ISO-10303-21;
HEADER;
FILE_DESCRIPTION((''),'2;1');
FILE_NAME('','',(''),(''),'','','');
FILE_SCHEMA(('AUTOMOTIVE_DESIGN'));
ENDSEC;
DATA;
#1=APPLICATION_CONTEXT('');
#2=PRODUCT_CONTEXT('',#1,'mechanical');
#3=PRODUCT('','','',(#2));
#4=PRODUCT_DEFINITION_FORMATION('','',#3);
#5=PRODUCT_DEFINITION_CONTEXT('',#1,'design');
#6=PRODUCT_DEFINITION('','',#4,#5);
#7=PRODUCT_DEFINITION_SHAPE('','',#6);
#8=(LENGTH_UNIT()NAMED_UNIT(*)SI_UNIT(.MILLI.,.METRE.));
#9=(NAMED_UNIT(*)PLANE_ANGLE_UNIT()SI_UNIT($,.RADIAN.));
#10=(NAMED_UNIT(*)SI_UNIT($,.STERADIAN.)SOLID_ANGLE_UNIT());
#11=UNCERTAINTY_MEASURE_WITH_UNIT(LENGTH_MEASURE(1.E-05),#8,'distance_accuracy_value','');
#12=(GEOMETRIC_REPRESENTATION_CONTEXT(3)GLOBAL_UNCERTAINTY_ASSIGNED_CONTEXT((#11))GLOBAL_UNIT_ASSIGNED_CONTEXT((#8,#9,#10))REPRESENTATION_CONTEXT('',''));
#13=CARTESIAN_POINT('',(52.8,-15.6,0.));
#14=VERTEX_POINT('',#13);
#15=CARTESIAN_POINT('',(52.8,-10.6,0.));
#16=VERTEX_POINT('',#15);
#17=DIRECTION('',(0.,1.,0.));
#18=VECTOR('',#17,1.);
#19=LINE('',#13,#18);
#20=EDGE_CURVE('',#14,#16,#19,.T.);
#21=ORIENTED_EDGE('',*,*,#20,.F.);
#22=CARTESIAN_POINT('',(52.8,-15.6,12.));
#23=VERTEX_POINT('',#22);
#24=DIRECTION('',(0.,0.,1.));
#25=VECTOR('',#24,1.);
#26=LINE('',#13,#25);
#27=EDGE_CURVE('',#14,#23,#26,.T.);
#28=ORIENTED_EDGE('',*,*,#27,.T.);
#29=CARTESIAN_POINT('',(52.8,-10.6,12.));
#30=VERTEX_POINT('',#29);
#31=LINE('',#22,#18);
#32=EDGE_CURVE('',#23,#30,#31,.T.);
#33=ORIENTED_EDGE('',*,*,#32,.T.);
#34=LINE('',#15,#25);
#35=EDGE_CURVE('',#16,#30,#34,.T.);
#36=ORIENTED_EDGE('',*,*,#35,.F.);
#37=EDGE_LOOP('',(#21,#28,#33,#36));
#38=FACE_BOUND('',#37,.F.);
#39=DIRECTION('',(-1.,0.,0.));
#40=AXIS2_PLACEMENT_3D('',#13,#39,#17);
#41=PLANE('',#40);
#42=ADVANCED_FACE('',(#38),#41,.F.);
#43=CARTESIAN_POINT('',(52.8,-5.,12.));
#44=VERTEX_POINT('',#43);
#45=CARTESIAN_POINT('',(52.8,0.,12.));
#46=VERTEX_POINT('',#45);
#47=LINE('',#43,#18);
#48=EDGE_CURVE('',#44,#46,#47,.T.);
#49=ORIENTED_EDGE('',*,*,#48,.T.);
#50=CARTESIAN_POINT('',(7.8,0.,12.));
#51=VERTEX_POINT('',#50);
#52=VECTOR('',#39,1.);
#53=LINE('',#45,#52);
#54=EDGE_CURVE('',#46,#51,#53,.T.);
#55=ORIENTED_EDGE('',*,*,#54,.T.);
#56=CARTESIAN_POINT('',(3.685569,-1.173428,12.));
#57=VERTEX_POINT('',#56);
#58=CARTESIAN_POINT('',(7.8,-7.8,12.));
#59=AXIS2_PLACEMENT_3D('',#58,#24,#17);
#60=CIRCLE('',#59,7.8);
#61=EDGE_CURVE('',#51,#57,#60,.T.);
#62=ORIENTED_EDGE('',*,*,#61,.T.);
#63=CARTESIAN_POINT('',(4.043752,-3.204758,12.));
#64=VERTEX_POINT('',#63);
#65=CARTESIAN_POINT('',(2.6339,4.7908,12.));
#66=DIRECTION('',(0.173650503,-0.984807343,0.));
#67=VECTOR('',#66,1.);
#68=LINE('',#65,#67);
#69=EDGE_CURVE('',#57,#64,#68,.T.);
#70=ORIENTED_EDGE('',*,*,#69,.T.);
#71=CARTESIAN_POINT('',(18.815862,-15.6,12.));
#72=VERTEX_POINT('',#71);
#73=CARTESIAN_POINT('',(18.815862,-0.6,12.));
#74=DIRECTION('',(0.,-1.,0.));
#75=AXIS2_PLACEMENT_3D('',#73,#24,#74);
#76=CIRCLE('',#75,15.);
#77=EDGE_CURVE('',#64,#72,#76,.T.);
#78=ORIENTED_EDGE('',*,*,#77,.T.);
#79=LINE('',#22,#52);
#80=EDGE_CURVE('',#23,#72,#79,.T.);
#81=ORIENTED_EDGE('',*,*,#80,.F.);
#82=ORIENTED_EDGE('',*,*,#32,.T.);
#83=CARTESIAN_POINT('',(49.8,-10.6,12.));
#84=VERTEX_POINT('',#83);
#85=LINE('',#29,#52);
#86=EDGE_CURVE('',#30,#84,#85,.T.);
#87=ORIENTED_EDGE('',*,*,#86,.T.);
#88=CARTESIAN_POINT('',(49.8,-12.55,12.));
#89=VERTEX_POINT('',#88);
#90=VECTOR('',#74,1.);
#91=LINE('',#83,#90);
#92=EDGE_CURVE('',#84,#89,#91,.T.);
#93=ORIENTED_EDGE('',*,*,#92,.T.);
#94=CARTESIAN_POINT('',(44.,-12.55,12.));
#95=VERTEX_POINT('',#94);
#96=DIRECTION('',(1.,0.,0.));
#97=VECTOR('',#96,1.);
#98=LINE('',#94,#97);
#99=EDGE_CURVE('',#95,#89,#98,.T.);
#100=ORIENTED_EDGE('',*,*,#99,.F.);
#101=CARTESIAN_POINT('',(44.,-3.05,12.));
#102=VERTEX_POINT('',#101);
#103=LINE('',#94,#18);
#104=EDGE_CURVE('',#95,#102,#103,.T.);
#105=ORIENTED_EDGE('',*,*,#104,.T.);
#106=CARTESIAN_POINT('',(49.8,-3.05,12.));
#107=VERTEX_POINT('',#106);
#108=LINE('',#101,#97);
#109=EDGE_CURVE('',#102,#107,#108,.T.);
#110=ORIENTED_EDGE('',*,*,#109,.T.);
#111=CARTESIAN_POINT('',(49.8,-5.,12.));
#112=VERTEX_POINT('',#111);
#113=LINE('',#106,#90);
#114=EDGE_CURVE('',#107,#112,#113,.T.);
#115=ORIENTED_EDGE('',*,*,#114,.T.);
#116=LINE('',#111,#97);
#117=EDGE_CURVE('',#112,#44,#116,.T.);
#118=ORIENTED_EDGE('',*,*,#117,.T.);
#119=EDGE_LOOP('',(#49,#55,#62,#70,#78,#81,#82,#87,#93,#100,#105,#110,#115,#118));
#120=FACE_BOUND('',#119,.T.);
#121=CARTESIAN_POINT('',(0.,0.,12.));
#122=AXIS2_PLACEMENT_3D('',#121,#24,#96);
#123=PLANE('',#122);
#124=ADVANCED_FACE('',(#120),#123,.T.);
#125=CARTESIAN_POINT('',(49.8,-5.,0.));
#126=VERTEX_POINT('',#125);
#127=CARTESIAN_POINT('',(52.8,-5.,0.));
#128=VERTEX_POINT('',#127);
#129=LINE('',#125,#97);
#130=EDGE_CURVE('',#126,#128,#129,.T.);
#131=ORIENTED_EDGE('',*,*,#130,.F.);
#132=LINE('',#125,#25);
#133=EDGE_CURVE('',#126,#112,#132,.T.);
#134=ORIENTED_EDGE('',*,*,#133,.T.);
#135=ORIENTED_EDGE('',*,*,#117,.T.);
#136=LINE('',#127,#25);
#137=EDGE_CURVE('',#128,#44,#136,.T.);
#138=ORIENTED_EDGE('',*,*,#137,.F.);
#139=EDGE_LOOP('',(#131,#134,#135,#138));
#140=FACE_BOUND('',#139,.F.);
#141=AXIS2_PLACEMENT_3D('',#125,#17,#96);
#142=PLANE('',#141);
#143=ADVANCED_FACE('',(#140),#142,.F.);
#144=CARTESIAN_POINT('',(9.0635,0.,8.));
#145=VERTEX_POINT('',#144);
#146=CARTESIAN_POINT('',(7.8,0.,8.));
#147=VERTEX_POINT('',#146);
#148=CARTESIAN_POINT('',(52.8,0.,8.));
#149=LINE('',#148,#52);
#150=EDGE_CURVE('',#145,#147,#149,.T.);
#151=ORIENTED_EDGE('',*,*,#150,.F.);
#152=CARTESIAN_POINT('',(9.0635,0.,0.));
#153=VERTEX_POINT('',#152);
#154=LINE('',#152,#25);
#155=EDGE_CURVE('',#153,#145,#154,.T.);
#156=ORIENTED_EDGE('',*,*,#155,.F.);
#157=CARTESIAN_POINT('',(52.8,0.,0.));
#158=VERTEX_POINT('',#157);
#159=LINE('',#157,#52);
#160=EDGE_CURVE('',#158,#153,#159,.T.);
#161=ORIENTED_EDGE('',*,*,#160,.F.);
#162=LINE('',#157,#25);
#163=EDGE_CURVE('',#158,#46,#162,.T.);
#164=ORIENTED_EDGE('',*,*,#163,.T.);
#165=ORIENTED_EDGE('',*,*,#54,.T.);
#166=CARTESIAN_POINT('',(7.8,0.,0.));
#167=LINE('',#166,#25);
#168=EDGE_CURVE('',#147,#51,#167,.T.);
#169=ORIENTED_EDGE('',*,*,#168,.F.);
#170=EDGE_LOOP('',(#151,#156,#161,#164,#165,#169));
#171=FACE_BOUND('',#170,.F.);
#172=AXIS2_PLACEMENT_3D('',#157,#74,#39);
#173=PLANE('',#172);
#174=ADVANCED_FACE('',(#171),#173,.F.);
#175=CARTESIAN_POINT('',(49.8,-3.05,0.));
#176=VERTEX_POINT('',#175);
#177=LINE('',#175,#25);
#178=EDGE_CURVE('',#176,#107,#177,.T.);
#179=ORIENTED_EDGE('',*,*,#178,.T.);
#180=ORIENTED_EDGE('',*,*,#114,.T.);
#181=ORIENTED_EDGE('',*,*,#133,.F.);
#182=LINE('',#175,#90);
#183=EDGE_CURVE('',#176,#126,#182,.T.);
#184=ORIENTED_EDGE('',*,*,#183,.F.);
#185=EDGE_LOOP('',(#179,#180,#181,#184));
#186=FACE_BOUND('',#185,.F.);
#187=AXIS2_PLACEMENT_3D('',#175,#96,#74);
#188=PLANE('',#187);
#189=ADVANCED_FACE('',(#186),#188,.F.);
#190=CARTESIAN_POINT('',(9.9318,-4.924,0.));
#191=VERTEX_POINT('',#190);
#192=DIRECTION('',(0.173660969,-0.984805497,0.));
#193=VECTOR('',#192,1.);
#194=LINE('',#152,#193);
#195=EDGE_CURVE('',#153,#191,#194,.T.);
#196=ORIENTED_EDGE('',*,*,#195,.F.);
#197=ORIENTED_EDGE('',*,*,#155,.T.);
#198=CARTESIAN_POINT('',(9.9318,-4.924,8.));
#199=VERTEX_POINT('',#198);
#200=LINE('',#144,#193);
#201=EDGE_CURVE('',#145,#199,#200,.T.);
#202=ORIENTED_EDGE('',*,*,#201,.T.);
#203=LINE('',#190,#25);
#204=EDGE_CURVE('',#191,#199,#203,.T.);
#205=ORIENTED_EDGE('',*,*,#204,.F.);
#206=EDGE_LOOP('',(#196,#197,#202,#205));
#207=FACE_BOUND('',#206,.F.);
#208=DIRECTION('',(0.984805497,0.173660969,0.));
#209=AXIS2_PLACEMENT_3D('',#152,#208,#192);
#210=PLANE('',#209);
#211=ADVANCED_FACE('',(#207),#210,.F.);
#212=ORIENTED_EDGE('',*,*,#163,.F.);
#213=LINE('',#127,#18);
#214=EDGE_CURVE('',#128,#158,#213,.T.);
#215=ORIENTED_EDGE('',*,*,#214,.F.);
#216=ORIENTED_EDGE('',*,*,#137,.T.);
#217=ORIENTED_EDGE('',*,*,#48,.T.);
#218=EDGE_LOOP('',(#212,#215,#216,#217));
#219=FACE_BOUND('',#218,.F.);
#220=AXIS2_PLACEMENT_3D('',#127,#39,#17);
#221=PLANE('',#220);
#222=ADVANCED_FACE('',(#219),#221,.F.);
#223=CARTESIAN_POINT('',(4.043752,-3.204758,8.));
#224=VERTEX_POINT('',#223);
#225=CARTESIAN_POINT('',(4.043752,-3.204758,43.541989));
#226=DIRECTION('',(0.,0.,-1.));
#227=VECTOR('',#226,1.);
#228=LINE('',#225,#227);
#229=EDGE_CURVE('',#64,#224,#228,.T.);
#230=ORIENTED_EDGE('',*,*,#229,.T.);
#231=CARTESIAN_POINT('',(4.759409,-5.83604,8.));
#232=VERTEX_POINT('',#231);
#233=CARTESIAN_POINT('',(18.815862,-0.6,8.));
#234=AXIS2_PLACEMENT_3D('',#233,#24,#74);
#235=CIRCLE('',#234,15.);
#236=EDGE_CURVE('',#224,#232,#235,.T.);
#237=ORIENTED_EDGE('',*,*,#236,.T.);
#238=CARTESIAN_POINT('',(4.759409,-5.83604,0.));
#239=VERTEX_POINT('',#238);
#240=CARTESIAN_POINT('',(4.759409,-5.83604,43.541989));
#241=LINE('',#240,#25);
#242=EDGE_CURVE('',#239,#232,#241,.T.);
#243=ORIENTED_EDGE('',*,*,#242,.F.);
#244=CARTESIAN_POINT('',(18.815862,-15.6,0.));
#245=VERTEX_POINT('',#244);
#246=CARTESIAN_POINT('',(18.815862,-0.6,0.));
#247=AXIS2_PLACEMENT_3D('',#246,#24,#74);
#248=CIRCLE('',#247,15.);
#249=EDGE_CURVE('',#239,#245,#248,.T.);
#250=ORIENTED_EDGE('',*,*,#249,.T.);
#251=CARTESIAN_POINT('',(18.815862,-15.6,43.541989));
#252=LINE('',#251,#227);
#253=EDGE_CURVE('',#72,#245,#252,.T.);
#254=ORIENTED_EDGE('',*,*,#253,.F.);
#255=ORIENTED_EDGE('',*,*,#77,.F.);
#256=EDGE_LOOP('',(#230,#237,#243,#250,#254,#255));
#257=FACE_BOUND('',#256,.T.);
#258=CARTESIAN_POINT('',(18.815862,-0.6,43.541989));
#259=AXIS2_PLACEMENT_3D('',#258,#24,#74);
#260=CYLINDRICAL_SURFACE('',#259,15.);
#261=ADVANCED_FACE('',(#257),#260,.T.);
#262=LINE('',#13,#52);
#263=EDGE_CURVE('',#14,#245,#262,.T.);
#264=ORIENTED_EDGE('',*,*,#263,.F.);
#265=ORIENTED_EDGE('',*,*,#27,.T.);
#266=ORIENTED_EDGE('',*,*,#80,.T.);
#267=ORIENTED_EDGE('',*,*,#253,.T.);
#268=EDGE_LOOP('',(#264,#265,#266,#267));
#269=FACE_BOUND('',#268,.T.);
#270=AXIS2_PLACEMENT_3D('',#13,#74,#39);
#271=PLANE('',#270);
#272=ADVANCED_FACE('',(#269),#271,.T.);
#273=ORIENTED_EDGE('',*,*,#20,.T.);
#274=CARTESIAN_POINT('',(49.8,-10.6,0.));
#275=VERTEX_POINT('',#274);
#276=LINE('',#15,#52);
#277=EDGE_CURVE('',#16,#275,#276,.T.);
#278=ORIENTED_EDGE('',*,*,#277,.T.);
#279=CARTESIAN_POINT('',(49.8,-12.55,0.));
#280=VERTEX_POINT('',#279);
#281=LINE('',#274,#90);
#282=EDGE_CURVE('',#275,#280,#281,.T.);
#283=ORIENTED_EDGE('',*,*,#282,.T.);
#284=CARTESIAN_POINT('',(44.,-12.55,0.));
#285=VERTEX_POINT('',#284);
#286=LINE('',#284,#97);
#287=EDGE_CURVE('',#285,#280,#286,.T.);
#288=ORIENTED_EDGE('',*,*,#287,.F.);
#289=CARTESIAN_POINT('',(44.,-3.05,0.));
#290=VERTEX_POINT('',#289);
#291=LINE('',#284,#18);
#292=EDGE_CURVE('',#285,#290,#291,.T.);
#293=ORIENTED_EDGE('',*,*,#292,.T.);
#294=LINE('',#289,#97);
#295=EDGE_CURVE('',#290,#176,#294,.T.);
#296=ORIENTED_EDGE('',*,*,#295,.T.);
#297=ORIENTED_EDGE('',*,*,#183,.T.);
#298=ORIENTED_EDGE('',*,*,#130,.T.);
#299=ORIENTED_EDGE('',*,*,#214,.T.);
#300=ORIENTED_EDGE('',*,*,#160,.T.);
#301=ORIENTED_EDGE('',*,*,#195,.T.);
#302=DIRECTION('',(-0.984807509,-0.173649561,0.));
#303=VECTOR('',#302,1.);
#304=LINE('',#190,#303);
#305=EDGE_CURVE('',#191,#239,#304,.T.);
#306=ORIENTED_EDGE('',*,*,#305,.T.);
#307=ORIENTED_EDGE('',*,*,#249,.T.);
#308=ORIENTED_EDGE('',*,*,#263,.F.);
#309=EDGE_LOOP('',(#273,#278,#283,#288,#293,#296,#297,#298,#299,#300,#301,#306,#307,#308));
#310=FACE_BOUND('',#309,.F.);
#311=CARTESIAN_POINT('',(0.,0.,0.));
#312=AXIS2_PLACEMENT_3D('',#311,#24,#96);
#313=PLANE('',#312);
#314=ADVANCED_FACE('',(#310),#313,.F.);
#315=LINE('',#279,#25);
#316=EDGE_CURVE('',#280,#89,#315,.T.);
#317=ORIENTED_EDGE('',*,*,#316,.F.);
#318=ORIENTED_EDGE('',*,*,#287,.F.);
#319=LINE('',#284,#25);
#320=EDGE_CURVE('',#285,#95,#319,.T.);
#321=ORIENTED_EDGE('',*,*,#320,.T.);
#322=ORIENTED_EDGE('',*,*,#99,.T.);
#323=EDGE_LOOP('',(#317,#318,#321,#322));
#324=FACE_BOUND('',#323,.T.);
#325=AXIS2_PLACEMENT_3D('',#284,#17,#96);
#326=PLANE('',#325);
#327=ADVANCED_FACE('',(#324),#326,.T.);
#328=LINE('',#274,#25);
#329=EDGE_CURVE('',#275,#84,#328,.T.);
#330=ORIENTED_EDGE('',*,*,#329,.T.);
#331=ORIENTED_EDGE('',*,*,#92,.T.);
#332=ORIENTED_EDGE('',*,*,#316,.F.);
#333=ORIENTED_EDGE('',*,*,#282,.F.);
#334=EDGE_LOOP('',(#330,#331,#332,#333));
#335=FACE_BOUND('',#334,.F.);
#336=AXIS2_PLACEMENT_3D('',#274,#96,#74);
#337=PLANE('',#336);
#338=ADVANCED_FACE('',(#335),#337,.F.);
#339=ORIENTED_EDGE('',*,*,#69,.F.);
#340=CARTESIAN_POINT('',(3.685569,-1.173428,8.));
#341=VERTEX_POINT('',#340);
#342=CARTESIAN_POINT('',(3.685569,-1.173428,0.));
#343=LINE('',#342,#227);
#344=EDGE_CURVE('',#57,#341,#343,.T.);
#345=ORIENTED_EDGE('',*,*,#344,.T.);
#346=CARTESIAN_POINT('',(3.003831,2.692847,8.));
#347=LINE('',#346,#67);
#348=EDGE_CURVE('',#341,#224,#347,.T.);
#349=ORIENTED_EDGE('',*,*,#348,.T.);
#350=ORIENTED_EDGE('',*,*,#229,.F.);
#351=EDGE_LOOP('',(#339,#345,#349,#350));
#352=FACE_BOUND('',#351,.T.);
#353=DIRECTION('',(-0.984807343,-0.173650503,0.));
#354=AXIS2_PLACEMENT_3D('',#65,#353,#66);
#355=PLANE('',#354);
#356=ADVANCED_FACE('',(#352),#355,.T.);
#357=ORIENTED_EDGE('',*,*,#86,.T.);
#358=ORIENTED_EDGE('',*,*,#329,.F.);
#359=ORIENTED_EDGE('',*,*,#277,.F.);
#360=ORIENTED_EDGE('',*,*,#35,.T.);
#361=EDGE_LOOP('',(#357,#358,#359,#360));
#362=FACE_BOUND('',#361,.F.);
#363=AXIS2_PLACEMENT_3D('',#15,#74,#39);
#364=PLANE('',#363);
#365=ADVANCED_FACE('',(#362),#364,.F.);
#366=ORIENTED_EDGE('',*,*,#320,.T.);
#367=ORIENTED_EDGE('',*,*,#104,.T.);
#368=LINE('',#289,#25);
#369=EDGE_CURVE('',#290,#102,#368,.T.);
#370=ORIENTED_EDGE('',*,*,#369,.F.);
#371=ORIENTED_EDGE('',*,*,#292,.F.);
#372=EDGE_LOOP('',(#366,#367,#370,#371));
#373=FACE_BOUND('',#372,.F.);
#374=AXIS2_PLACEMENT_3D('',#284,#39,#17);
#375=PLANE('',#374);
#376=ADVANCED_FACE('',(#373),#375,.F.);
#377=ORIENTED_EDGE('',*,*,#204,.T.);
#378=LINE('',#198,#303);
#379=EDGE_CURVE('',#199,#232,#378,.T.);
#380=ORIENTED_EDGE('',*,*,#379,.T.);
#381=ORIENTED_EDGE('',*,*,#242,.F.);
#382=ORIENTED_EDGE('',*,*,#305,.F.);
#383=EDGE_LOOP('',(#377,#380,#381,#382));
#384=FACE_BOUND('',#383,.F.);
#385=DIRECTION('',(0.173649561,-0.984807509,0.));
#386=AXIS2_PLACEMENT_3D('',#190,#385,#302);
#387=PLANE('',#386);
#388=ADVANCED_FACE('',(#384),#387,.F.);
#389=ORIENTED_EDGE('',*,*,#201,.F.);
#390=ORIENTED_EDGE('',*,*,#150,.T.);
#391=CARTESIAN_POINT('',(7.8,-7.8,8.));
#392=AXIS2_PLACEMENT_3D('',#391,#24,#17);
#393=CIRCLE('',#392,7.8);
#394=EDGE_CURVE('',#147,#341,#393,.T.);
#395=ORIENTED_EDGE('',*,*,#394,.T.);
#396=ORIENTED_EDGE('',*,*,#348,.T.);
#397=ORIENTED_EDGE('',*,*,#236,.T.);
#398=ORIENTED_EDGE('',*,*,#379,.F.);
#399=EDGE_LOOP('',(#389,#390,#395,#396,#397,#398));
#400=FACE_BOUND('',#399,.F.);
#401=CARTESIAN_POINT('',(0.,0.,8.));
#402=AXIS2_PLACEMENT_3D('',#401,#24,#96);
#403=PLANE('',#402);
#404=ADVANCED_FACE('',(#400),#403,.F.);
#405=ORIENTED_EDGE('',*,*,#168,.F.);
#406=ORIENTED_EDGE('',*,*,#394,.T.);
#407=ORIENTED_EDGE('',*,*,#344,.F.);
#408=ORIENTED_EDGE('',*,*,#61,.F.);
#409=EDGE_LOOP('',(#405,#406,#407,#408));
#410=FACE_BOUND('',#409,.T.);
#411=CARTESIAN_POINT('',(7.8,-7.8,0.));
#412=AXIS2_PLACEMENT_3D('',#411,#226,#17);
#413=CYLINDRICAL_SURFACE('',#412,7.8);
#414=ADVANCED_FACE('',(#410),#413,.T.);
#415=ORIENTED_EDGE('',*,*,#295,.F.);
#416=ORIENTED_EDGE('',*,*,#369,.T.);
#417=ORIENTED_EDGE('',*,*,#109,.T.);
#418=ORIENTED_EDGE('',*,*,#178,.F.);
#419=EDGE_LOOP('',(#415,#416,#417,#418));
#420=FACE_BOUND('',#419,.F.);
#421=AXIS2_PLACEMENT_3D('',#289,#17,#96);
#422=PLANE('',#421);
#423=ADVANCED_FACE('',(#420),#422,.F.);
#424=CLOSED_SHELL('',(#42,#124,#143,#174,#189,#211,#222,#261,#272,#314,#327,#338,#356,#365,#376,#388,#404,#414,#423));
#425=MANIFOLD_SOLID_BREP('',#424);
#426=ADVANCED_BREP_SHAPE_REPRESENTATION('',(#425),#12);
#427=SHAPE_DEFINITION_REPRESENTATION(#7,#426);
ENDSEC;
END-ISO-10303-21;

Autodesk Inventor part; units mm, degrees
ref_plane "YZ Plane" through (0, 0, 0) normal (1, 0, 0) x (0, 1, 0)
ref_plane "XZ Plane" through (0, 0, 0) normal (0, 1, 0) x (-1, 0, 0)
ref_plane "XY Plane" through (0, 0, 0) normal (0, 0, 1) x (1, 0, 0)
sketch "Sketch5" plane through (0, 0, 0) normal (0, 0, 1) x (1, 0, 0)
  line L0 (52.8, -15.6) -> (52.8, -10.6)
  line L1 (52.8, -10.6) -> (49.8, -10.6)
  line L2 (49.8, -10.6) -> (49.8, -12.55)
  line L3 (44, -12.55) -> (44, -3.05)
  line L4 (49.8, -3.05) -> (49.8, -5)
  line L5 (49.8, -5) -> (52.8, -5)
  line L6 (52.8, -5) -> (52.8, 0)
  line L7 (52.8, 0) -> (7.8, 0)
  line L8 (44, -3.05) -> (49.8, -3.05)
  line L9 (44, -12.55) -> (49.8, -12.55)
  line L10 (52.8, -15.6) -> (7.8, -15.6)
  arc A0 (7.8, 0) -> (7.8, -15.6) centre (7.8, -7.8) ccw
  point P0 (0, 0)
  dimension "d41" = 5.8
  dimension "d48" = 44
  dimension "d50" = 3
  dimension "d63" = 45
  dimension "d67" = 15.6
  dimension "d71" = 0
  dimension "d72" = 36.2
  dimension "d87" = 5.6
  dimension "d88" = 9.5
extrude "Extrusion2" add sketch "Sketch5" along normal blind 12
sketch "Sketch11" plane through (0, 0, 12) normal (0, 0, 1) x (1, 0, 0)
  line L0 (52.8, 0) -> (7.8, 0) projected
  line L1 (9.0635, 0) -> (9.9318, -4.924)
  line L2 (9.9318, -4.924) -> (0.0837, -6.6605)
  arc A0 (7.8, 0) -> (7.8, -15.6) centre (7.8, -7.8) ccw projected
  point P0 (0, 0)
  dimension "d95" = 100
  dimension "d96" = 5
  dimension "d97" = 10
extrude "Extrusion7" cut sketch "Sketch11" along normal blind 8 from surface at -12
sketch "Sketch14" plane through (0, 0, 12) normal (0, 0, 1) x (1, 0, 0)
  line L0 (2.6339, 4.7908) -> (6.9247, -19.5432)
  line L1 (6.9247, -19.5432) -> (-9.4392, -22.4286)
  line L2 (-9.4392, -22.4286) -> (-13.7299, 1.9055)
  line L3 (-13.7299, 1.9055) -> (2.6339, 4.7908)
  line L4 (9.0635, 0) -> (9.9318, -4.924) projected
  point P0 (0, 0)
  dimension "d107" = 5.5
extrude "Extrusion10" cut sketch "Sketch14" against normal through all
fillet "Fillet2" radius 15 1 edges at (6.2001, -15.4342, 6)
equation "\"l1\" = 8"
properties part number "Finray_test_8_Kerbe_10deg_V4_links"
